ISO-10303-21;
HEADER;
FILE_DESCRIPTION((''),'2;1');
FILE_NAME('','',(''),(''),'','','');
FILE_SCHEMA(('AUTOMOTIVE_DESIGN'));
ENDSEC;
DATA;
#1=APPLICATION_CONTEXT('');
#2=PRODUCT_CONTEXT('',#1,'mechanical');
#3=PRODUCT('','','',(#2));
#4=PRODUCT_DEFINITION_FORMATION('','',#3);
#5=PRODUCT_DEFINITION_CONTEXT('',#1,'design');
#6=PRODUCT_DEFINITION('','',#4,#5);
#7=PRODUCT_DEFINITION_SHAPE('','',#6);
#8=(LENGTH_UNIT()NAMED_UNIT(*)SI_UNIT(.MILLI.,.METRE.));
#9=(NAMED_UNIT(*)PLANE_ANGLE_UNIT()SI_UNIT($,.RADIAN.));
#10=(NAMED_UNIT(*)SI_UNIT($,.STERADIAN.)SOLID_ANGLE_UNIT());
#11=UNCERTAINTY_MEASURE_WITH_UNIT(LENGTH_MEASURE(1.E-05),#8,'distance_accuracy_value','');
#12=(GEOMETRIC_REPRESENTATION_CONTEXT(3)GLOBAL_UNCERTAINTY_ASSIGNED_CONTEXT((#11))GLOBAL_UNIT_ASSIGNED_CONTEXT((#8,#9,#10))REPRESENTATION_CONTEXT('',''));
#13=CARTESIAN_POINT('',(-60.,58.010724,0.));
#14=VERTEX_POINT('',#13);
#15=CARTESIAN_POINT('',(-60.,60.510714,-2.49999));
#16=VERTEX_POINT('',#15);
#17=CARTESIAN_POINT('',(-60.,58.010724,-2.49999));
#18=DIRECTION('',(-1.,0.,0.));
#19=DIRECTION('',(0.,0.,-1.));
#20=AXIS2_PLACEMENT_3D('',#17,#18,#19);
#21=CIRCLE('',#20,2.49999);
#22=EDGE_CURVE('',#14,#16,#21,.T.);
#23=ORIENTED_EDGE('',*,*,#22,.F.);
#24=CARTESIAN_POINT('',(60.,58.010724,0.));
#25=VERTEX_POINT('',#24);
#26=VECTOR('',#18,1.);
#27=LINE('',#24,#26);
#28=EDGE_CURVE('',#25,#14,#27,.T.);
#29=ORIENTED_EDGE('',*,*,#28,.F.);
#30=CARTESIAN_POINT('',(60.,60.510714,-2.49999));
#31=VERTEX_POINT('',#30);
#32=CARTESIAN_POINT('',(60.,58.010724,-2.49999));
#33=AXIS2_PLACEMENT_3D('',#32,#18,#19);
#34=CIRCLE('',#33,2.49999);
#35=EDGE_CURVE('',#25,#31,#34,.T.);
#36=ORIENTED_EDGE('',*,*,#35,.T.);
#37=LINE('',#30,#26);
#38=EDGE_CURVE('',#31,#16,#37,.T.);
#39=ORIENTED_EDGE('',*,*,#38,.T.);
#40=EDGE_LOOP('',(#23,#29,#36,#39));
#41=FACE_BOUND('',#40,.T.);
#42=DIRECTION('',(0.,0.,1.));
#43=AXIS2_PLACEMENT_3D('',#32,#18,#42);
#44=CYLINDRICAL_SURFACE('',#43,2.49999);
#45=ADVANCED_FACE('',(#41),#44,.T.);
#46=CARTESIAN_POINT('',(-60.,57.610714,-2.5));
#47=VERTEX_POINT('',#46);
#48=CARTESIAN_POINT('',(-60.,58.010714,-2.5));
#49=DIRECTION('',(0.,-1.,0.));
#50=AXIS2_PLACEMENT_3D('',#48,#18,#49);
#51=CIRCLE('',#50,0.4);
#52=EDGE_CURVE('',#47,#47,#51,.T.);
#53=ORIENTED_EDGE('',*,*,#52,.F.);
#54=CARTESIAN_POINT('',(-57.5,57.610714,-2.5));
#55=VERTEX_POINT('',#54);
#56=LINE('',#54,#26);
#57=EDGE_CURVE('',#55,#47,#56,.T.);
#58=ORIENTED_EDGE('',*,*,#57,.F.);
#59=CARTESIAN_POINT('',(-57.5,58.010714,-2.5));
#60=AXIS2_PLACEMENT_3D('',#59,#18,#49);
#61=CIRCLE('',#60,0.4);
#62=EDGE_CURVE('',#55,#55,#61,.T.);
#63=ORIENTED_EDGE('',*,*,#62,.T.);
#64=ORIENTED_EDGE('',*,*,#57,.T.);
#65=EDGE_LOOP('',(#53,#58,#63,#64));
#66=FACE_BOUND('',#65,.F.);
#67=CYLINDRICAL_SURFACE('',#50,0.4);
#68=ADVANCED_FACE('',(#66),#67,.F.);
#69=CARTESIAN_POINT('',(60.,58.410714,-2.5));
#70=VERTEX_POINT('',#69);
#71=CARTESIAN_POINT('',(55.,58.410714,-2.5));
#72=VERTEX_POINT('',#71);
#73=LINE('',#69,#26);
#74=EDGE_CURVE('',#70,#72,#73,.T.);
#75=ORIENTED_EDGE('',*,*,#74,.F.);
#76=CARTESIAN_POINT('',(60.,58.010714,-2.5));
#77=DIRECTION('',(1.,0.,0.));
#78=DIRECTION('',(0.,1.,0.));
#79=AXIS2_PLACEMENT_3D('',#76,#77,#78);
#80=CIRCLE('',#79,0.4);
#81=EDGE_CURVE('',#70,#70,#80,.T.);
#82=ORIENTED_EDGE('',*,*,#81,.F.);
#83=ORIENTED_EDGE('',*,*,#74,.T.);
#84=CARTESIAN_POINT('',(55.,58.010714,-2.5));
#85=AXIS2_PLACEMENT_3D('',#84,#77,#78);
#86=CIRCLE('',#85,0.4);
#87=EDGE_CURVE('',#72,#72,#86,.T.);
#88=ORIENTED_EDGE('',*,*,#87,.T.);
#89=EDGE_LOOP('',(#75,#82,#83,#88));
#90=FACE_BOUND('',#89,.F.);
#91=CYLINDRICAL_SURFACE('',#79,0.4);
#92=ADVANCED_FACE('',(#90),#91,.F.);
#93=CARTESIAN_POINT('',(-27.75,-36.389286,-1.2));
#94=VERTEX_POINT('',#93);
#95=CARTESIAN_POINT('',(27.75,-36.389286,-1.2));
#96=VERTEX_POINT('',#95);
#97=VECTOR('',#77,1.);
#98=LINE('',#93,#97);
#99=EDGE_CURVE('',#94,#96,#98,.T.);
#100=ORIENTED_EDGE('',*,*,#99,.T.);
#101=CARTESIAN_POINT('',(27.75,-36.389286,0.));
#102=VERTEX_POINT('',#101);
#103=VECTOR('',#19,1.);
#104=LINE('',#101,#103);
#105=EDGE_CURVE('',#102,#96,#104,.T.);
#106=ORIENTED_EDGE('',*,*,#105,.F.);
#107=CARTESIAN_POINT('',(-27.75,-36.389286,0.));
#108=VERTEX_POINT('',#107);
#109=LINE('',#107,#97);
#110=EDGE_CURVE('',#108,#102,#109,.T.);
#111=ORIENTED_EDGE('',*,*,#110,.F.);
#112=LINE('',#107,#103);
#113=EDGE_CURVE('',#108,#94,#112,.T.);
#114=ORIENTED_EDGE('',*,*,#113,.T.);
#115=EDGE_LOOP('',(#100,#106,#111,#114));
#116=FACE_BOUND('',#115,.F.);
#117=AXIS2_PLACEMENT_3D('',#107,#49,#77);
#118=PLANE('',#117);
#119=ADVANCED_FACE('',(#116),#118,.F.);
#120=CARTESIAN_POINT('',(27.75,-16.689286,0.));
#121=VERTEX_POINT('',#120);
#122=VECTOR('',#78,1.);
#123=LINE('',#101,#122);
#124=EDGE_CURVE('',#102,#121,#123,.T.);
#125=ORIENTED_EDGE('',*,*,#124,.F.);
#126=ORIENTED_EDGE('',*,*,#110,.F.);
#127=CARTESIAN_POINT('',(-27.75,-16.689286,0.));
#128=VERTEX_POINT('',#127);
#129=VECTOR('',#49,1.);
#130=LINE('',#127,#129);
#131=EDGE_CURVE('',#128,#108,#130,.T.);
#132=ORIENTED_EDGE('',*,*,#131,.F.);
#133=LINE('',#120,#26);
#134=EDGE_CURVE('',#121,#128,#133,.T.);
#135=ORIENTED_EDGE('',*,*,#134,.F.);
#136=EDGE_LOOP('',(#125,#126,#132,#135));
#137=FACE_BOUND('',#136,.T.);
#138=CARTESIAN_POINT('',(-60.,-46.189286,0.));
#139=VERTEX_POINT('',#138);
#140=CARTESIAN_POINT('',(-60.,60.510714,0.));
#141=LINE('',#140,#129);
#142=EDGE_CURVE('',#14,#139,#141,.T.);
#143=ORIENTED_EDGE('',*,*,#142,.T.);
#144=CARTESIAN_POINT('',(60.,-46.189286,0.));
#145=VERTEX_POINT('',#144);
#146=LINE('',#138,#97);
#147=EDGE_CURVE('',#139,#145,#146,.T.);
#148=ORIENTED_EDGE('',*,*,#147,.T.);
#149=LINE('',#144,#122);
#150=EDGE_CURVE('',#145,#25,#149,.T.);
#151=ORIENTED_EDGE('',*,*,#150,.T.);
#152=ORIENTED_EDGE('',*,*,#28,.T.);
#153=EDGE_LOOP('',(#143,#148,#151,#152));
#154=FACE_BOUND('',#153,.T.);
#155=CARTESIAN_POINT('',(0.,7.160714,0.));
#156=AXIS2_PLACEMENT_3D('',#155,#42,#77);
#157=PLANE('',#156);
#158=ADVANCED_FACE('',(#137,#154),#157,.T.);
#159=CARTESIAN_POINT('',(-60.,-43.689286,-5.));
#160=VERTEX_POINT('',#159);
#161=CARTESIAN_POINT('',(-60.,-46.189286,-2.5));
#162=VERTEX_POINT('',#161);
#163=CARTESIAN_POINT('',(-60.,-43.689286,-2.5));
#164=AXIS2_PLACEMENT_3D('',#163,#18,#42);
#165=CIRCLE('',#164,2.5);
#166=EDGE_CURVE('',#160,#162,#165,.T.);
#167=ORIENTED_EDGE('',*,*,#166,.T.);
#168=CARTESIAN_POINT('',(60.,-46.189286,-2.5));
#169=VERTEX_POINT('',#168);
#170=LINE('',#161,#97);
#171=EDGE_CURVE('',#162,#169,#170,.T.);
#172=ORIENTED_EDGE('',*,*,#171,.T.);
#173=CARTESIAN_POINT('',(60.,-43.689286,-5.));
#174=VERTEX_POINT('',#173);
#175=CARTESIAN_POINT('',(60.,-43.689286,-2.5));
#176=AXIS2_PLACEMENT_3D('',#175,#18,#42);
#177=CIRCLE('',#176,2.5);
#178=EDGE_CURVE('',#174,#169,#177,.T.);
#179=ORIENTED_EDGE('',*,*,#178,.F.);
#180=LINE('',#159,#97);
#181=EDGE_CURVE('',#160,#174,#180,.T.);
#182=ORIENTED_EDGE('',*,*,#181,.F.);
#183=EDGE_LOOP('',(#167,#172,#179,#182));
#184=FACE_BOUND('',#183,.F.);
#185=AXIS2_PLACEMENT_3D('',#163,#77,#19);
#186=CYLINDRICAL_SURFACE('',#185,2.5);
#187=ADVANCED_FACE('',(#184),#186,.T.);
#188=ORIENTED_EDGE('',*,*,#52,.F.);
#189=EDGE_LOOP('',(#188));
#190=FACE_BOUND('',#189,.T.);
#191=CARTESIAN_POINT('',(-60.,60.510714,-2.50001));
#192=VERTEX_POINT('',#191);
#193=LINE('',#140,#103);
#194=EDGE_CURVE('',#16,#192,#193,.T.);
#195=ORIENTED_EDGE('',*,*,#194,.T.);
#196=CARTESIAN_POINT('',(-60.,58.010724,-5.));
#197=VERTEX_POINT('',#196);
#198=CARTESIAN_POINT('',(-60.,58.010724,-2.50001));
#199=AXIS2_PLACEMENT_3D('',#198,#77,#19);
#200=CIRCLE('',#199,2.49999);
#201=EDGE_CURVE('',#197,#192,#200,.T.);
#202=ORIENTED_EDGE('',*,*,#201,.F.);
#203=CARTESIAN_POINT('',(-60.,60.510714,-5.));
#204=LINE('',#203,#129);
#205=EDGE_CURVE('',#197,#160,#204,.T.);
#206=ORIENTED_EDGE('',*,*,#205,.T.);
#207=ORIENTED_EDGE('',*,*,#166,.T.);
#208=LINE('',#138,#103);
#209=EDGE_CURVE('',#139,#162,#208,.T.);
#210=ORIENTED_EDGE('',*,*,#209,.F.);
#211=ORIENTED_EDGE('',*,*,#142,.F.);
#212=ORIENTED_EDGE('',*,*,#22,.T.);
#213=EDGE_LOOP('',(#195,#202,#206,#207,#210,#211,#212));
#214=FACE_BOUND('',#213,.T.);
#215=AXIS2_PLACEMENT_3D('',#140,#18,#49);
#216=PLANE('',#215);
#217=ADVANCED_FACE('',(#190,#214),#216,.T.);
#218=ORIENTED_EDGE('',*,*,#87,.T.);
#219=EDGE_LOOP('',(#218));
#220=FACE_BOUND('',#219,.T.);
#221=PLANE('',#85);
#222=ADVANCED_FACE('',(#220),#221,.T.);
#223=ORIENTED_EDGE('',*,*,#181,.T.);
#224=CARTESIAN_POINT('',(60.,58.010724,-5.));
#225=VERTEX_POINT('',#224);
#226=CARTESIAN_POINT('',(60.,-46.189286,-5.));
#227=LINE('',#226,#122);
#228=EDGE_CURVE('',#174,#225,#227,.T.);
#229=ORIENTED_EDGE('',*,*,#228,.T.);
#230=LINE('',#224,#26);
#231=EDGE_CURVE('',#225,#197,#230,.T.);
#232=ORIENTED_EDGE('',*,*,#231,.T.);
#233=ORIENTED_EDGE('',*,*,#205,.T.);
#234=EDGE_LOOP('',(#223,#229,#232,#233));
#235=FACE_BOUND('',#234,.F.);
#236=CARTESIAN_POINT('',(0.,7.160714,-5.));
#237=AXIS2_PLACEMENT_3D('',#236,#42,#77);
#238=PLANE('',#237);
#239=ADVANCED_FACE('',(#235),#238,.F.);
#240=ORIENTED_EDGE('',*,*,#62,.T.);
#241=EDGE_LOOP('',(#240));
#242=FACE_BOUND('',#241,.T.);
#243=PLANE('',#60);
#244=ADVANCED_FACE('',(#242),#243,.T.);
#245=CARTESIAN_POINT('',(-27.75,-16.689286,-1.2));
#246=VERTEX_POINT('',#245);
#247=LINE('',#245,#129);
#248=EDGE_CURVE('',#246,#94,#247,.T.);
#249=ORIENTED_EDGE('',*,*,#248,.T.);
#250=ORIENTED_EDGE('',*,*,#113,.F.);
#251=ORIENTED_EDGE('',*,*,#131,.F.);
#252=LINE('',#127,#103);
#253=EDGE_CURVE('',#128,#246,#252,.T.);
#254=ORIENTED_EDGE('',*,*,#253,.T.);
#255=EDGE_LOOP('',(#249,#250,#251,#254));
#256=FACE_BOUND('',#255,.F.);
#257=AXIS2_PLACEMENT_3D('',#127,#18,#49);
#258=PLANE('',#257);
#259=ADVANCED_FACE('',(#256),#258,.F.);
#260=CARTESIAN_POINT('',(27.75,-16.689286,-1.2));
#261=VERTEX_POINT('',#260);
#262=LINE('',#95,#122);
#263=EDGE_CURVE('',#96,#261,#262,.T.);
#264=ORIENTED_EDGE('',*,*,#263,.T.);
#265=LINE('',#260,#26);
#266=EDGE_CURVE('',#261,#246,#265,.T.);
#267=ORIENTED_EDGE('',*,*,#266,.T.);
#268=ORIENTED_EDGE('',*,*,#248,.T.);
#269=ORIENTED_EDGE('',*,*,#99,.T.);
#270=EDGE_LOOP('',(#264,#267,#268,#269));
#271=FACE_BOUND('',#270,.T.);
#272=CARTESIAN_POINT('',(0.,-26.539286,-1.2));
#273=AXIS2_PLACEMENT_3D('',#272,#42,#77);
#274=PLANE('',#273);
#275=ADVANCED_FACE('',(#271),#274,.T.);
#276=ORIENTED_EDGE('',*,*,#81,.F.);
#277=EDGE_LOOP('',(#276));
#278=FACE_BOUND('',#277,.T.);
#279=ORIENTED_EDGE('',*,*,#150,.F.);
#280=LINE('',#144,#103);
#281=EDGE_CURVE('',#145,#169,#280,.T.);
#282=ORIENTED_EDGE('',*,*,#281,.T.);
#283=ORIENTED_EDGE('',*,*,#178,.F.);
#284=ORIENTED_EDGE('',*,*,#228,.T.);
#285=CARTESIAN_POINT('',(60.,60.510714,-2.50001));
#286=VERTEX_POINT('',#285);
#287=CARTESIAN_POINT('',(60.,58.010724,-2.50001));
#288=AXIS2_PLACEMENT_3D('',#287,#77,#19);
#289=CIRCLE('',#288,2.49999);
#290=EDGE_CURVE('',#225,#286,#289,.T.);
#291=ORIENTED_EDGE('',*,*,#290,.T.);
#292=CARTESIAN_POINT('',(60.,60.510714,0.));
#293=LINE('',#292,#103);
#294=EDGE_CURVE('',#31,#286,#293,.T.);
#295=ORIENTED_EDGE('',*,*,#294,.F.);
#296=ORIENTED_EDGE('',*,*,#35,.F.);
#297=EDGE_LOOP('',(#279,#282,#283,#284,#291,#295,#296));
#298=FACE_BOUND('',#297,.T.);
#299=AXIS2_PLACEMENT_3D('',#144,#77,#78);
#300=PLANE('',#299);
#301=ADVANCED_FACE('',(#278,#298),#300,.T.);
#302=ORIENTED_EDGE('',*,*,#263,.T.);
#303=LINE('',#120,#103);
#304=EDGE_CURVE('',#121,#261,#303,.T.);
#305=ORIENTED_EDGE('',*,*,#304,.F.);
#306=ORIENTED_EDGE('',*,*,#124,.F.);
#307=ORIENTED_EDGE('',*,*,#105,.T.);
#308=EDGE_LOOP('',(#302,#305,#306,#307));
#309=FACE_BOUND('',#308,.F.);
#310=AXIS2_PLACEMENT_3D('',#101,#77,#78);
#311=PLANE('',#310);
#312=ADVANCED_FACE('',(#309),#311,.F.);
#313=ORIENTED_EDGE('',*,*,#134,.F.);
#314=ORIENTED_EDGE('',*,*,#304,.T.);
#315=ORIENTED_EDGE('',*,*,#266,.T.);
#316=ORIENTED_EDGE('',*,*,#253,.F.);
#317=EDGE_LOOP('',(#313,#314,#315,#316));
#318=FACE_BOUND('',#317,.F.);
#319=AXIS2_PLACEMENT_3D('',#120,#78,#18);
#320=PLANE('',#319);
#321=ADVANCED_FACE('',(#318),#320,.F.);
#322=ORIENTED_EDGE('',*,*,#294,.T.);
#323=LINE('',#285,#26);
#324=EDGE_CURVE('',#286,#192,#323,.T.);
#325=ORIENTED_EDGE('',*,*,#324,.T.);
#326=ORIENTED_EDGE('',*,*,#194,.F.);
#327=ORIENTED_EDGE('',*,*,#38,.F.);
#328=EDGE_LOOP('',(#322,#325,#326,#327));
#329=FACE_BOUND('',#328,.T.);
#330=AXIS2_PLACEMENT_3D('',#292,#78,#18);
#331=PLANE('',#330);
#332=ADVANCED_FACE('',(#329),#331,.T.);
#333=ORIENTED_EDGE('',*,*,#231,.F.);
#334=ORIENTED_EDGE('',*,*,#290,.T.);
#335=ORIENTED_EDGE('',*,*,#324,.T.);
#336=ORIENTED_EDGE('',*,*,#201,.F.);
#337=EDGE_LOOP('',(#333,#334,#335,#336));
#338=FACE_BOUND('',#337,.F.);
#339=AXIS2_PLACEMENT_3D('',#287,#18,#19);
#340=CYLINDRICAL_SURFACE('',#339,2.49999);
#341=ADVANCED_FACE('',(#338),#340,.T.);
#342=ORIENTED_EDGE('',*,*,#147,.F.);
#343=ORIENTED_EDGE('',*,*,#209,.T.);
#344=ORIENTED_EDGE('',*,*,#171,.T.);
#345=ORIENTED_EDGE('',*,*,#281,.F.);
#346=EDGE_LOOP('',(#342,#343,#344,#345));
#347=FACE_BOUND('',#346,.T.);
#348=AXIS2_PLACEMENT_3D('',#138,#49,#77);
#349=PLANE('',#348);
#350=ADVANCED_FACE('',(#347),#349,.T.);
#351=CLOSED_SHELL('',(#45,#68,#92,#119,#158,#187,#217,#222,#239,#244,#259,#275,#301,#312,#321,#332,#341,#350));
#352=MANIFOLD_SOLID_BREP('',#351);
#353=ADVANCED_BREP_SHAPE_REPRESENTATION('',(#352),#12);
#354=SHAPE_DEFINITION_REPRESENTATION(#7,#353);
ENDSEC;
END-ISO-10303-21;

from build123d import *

# Parameters (mm, degrees)
F2_DEPTH = 5
F3_DEPTH = 1.2
F4_R     = 0.4
F5_DEPTH = 2.5
F6_R     = 0.4
F7_DEPTH = 5
F8_R     = 2.49999
F9_R     = 2.5


# Not quite as in the source:
# - a fillet or chamfer is up to 0.001 mm smaller than in the source, because OpenCascade refuses the exact size


with BuildPart() as f2:
    # F1 (on Top) → F2 (new body)
    with BuildSketch(Plane.XY):
        Polygon((-60, -46.1892857143), (-0.7, -46.1892857143), (60, -46.1892857143), (60, 60.5107142857), (0, 60.5107142857), (-60, 60.5107142857), align=None)
        Polygon((-27.75, -16.6892857143), (0, -16.6892857143), (27.75, -16.6892857143), (27.75, -36.3892857143), (-0.7, -36.3892857143), (-27.75, -36.3892857143), align=None, mode=Mode.SUBTRACT)
        Polygon((27.75, -16.6892857143), (0, -16.6892857143), (-27.75, -16.6892857143), (-27.75, -36.3892857143), (-0.7, -36.3892857143), (27.75, -36.3892857143), align=None)
    extrude(amount=-F2_DEPTH)

    # F1 (on Top) → F3 (cut)
    with BuildSketch(Plane.XY):
        Polygon((27.75, -16.6892857143), (0, -16.6892857143), (-27.75, -16.6892857143), (-27.75, -36.3892857143), (-0.7, -36.3892857143), (27.75, -36.3892857143), align=None)
    extrude(amount=-F3_DEPTH, mode=Mode.SUBTRACT)

    # F4 (on face) → F5 (cut, symmetric)
    with BuildSketch(Plane(origin=(-60, 0, 0), x_dir=(0, -1, 0), z_dir=(-1, 0, 0))):
        with Locations((-58.0107142857, -2.5)):
            Circle(F4_R)
    extrude(amount=F5_DEPTH, both=True, mode=Mode.SUBTRACT)

    # F6 (on face) → F7 (cut)
    with BuildSketch(Plane.YZ.offset(60)):
        with Locations((58.0107142857, -2.5)):
            Circle(F6_R)
    extrude(amount=-F7_DEPTH, mode=Mode.SUBTRACT)

    # F8 (radius 2.5 in the source; OpenCascade refuses exactly that, so slightly less here)
    f8_edges = [f2.edges().sort_by_distance(p)[0] for p in [
        (0, 60.510714, 0),
        (0, 60.510714, -5),
    ]]
    fillet(f8_edges, radius=F8_R)

    # F9
    f9_edges = [f2.edges().sort_by_distance(p)[0] for p in [
        (0, -46.189286, -5),
    ]]
    fillet(f9_edges, radius=F9_R)


solid = f2.part
